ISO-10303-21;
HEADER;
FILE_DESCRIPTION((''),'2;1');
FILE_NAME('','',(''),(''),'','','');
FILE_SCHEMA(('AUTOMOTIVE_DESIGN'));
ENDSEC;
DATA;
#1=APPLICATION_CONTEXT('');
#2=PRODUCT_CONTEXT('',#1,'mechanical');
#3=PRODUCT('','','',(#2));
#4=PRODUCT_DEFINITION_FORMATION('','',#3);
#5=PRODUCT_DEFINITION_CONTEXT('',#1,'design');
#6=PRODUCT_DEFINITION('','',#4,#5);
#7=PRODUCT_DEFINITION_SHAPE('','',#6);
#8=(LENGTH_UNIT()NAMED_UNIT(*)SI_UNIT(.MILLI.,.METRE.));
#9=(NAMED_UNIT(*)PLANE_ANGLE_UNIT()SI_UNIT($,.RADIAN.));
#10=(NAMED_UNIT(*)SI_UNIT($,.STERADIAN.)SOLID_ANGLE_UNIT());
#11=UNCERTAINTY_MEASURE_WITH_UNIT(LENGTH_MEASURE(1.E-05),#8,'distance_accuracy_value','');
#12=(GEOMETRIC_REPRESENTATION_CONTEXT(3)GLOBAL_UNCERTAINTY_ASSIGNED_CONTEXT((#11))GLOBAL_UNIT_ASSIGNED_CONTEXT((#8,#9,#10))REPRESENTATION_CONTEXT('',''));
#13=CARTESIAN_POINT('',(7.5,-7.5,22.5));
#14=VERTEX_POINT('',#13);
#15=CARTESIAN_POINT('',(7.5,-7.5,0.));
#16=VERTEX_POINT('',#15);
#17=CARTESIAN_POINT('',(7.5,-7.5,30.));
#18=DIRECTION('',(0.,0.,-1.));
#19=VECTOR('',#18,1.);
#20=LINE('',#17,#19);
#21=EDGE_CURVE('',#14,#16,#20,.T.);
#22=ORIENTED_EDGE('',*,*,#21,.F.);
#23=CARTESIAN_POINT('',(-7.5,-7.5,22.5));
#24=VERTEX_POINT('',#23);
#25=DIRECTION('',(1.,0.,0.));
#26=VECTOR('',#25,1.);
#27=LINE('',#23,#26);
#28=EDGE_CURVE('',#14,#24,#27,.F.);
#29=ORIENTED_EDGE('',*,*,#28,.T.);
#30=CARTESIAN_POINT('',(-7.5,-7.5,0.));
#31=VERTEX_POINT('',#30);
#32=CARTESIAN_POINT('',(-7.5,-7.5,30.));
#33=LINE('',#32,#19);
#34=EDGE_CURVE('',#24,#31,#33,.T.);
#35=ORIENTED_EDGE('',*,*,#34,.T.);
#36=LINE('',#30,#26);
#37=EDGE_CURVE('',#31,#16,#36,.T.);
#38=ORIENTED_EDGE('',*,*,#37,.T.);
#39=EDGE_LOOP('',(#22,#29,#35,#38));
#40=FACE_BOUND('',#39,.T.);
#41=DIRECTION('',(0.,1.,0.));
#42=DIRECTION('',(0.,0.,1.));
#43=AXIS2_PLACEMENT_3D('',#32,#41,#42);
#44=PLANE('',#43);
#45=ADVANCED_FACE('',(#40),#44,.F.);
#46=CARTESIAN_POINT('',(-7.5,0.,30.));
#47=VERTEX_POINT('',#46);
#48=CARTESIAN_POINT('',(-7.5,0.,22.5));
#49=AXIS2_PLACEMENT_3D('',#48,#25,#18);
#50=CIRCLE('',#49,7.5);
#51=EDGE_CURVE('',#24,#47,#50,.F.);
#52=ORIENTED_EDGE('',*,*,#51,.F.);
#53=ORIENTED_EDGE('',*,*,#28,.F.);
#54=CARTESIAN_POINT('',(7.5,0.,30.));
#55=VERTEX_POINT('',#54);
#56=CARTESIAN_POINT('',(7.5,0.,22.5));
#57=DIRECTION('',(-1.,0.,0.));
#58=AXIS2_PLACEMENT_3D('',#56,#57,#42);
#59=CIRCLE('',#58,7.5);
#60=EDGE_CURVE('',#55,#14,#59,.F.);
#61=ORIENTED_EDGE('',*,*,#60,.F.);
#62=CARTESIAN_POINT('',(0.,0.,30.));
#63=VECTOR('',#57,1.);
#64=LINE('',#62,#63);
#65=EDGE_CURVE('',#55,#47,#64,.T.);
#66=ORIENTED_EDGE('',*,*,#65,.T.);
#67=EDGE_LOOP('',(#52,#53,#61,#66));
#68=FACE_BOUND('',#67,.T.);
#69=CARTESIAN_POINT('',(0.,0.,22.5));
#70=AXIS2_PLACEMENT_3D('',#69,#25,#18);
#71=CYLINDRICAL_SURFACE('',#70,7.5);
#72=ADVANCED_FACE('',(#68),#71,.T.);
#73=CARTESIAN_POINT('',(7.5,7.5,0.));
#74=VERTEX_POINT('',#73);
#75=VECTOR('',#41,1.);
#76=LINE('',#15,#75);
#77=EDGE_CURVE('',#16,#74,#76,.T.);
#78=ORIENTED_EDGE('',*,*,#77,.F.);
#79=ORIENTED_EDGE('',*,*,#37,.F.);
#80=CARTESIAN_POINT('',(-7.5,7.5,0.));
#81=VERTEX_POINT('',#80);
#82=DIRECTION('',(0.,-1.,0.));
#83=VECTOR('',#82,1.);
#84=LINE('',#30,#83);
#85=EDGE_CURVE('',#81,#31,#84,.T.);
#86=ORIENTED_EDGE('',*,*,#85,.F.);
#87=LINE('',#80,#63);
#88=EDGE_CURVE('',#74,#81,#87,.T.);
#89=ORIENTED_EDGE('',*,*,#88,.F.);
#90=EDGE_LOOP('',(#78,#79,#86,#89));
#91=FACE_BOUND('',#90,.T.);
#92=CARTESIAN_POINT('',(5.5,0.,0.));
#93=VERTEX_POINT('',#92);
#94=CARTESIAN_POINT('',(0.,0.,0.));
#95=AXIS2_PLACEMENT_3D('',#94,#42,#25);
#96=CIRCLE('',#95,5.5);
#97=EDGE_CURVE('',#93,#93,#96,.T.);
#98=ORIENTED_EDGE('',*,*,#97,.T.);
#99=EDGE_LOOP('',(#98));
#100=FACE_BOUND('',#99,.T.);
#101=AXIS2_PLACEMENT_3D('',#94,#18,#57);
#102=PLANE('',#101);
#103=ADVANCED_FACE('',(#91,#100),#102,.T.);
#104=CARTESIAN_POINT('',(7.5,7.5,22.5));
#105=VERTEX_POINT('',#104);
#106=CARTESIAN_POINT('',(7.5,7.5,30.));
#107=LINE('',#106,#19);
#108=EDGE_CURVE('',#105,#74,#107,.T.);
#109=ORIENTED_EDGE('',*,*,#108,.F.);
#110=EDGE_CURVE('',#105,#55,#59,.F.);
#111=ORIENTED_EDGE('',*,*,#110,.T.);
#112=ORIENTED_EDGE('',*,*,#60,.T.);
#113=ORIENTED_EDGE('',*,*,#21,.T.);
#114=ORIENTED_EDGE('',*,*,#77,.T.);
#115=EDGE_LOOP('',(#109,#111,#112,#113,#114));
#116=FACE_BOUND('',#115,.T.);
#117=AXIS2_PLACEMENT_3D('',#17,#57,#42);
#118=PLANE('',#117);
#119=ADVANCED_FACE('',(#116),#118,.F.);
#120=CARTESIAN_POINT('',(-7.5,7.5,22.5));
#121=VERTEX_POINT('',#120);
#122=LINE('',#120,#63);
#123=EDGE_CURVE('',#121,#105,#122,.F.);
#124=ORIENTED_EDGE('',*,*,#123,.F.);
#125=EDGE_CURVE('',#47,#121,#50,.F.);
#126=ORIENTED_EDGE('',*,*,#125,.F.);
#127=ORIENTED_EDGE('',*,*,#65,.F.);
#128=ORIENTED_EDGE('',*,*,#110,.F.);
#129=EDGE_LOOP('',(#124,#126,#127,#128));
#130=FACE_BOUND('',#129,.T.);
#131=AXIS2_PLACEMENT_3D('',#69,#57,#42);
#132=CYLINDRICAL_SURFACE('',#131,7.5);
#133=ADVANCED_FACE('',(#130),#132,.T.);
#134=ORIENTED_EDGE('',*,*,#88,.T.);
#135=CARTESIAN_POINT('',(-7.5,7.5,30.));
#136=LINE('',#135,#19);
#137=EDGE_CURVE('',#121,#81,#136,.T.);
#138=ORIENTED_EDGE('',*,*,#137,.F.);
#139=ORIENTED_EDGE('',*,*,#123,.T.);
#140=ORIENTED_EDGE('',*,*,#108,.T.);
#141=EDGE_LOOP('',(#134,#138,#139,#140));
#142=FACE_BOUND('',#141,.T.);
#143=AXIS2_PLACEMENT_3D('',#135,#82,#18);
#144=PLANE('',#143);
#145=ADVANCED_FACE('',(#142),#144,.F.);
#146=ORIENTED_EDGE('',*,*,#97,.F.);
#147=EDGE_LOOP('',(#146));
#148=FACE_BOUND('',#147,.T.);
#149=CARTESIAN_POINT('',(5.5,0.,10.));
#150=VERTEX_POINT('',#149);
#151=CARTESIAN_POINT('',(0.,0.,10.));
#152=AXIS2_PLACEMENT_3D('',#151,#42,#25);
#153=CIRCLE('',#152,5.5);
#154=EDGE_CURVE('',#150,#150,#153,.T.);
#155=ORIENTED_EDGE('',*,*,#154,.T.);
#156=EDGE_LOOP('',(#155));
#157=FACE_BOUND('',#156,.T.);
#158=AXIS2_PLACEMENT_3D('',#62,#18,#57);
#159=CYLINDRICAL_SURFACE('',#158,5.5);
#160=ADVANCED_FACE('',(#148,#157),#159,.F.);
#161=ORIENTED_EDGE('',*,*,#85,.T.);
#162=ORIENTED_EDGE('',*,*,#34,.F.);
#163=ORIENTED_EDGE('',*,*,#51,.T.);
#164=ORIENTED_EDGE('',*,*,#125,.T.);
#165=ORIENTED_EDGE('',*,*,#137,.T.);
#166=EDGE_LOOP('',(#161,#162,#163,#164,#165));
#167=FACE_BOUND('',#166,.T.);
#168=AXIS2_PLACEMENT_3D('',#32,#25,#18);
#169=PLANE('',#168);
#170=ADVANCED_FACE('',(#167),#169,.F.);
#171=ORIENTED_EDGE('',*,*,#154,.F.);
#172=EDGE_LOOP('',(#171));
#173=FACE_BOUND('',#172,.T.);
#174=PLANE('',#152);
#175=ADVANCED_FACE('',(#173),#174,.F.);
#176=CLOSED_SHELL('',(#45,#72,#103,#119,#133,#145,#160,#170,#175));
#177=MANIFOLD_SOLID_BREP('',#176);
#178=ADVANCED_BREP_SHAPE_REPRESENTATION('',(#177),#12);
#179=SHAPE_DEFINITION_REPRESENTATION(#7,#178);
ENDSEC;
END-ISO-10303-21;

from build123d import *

# Parameters (mm, degrees)
SKETCH_1_W      = 15
SKETCH_1_H      = 15
SKETCH_1_R      = 5.5
EXTRUDE_1_DEPTH = 30
SKETCH_5_W      = 15
SKETCH_5_H      = 15
EXTRUDE_3_DEPTH = 20
FILLET_2_R      = 7.5


with BuildPart() as part:
    # ｽｹｯﾁ1 → ﾎﾞｽ - 押し出し1 (new body)
    with BuildSketch(Plane.XY):
        Rectangle(SKETCH_1_W, SKETCH_1_H)
        Circle(SKETCH_1_R, mode=Mode.SUBTRACT)
    extrude(amount=EXTRUDE_1_DEPTH)

    # ｽｹｯﾁ5 → ﾎﾞｽ - 押し出し3 (add)
    with BuildSketch(Plane.XY.offset(30)):
        Rectangle(SKETCH_5_W, SKETCH_5_H)
    extrude(amount=-EXTRUDE_3_DEPTH)

    # ﾌｨﾚｯﾄ2
    fillet_2_edges = [part.edges().sort_by_distance(p)[0] for p in [
        (0, -7.5, 30),
        (0, 7.5, 30),
    ]]
    fillet(fillet_2_edges, radius=FILLET_2_R - 0.0001)  # a hair under: the kernel refuses the full size


solid = part.part
